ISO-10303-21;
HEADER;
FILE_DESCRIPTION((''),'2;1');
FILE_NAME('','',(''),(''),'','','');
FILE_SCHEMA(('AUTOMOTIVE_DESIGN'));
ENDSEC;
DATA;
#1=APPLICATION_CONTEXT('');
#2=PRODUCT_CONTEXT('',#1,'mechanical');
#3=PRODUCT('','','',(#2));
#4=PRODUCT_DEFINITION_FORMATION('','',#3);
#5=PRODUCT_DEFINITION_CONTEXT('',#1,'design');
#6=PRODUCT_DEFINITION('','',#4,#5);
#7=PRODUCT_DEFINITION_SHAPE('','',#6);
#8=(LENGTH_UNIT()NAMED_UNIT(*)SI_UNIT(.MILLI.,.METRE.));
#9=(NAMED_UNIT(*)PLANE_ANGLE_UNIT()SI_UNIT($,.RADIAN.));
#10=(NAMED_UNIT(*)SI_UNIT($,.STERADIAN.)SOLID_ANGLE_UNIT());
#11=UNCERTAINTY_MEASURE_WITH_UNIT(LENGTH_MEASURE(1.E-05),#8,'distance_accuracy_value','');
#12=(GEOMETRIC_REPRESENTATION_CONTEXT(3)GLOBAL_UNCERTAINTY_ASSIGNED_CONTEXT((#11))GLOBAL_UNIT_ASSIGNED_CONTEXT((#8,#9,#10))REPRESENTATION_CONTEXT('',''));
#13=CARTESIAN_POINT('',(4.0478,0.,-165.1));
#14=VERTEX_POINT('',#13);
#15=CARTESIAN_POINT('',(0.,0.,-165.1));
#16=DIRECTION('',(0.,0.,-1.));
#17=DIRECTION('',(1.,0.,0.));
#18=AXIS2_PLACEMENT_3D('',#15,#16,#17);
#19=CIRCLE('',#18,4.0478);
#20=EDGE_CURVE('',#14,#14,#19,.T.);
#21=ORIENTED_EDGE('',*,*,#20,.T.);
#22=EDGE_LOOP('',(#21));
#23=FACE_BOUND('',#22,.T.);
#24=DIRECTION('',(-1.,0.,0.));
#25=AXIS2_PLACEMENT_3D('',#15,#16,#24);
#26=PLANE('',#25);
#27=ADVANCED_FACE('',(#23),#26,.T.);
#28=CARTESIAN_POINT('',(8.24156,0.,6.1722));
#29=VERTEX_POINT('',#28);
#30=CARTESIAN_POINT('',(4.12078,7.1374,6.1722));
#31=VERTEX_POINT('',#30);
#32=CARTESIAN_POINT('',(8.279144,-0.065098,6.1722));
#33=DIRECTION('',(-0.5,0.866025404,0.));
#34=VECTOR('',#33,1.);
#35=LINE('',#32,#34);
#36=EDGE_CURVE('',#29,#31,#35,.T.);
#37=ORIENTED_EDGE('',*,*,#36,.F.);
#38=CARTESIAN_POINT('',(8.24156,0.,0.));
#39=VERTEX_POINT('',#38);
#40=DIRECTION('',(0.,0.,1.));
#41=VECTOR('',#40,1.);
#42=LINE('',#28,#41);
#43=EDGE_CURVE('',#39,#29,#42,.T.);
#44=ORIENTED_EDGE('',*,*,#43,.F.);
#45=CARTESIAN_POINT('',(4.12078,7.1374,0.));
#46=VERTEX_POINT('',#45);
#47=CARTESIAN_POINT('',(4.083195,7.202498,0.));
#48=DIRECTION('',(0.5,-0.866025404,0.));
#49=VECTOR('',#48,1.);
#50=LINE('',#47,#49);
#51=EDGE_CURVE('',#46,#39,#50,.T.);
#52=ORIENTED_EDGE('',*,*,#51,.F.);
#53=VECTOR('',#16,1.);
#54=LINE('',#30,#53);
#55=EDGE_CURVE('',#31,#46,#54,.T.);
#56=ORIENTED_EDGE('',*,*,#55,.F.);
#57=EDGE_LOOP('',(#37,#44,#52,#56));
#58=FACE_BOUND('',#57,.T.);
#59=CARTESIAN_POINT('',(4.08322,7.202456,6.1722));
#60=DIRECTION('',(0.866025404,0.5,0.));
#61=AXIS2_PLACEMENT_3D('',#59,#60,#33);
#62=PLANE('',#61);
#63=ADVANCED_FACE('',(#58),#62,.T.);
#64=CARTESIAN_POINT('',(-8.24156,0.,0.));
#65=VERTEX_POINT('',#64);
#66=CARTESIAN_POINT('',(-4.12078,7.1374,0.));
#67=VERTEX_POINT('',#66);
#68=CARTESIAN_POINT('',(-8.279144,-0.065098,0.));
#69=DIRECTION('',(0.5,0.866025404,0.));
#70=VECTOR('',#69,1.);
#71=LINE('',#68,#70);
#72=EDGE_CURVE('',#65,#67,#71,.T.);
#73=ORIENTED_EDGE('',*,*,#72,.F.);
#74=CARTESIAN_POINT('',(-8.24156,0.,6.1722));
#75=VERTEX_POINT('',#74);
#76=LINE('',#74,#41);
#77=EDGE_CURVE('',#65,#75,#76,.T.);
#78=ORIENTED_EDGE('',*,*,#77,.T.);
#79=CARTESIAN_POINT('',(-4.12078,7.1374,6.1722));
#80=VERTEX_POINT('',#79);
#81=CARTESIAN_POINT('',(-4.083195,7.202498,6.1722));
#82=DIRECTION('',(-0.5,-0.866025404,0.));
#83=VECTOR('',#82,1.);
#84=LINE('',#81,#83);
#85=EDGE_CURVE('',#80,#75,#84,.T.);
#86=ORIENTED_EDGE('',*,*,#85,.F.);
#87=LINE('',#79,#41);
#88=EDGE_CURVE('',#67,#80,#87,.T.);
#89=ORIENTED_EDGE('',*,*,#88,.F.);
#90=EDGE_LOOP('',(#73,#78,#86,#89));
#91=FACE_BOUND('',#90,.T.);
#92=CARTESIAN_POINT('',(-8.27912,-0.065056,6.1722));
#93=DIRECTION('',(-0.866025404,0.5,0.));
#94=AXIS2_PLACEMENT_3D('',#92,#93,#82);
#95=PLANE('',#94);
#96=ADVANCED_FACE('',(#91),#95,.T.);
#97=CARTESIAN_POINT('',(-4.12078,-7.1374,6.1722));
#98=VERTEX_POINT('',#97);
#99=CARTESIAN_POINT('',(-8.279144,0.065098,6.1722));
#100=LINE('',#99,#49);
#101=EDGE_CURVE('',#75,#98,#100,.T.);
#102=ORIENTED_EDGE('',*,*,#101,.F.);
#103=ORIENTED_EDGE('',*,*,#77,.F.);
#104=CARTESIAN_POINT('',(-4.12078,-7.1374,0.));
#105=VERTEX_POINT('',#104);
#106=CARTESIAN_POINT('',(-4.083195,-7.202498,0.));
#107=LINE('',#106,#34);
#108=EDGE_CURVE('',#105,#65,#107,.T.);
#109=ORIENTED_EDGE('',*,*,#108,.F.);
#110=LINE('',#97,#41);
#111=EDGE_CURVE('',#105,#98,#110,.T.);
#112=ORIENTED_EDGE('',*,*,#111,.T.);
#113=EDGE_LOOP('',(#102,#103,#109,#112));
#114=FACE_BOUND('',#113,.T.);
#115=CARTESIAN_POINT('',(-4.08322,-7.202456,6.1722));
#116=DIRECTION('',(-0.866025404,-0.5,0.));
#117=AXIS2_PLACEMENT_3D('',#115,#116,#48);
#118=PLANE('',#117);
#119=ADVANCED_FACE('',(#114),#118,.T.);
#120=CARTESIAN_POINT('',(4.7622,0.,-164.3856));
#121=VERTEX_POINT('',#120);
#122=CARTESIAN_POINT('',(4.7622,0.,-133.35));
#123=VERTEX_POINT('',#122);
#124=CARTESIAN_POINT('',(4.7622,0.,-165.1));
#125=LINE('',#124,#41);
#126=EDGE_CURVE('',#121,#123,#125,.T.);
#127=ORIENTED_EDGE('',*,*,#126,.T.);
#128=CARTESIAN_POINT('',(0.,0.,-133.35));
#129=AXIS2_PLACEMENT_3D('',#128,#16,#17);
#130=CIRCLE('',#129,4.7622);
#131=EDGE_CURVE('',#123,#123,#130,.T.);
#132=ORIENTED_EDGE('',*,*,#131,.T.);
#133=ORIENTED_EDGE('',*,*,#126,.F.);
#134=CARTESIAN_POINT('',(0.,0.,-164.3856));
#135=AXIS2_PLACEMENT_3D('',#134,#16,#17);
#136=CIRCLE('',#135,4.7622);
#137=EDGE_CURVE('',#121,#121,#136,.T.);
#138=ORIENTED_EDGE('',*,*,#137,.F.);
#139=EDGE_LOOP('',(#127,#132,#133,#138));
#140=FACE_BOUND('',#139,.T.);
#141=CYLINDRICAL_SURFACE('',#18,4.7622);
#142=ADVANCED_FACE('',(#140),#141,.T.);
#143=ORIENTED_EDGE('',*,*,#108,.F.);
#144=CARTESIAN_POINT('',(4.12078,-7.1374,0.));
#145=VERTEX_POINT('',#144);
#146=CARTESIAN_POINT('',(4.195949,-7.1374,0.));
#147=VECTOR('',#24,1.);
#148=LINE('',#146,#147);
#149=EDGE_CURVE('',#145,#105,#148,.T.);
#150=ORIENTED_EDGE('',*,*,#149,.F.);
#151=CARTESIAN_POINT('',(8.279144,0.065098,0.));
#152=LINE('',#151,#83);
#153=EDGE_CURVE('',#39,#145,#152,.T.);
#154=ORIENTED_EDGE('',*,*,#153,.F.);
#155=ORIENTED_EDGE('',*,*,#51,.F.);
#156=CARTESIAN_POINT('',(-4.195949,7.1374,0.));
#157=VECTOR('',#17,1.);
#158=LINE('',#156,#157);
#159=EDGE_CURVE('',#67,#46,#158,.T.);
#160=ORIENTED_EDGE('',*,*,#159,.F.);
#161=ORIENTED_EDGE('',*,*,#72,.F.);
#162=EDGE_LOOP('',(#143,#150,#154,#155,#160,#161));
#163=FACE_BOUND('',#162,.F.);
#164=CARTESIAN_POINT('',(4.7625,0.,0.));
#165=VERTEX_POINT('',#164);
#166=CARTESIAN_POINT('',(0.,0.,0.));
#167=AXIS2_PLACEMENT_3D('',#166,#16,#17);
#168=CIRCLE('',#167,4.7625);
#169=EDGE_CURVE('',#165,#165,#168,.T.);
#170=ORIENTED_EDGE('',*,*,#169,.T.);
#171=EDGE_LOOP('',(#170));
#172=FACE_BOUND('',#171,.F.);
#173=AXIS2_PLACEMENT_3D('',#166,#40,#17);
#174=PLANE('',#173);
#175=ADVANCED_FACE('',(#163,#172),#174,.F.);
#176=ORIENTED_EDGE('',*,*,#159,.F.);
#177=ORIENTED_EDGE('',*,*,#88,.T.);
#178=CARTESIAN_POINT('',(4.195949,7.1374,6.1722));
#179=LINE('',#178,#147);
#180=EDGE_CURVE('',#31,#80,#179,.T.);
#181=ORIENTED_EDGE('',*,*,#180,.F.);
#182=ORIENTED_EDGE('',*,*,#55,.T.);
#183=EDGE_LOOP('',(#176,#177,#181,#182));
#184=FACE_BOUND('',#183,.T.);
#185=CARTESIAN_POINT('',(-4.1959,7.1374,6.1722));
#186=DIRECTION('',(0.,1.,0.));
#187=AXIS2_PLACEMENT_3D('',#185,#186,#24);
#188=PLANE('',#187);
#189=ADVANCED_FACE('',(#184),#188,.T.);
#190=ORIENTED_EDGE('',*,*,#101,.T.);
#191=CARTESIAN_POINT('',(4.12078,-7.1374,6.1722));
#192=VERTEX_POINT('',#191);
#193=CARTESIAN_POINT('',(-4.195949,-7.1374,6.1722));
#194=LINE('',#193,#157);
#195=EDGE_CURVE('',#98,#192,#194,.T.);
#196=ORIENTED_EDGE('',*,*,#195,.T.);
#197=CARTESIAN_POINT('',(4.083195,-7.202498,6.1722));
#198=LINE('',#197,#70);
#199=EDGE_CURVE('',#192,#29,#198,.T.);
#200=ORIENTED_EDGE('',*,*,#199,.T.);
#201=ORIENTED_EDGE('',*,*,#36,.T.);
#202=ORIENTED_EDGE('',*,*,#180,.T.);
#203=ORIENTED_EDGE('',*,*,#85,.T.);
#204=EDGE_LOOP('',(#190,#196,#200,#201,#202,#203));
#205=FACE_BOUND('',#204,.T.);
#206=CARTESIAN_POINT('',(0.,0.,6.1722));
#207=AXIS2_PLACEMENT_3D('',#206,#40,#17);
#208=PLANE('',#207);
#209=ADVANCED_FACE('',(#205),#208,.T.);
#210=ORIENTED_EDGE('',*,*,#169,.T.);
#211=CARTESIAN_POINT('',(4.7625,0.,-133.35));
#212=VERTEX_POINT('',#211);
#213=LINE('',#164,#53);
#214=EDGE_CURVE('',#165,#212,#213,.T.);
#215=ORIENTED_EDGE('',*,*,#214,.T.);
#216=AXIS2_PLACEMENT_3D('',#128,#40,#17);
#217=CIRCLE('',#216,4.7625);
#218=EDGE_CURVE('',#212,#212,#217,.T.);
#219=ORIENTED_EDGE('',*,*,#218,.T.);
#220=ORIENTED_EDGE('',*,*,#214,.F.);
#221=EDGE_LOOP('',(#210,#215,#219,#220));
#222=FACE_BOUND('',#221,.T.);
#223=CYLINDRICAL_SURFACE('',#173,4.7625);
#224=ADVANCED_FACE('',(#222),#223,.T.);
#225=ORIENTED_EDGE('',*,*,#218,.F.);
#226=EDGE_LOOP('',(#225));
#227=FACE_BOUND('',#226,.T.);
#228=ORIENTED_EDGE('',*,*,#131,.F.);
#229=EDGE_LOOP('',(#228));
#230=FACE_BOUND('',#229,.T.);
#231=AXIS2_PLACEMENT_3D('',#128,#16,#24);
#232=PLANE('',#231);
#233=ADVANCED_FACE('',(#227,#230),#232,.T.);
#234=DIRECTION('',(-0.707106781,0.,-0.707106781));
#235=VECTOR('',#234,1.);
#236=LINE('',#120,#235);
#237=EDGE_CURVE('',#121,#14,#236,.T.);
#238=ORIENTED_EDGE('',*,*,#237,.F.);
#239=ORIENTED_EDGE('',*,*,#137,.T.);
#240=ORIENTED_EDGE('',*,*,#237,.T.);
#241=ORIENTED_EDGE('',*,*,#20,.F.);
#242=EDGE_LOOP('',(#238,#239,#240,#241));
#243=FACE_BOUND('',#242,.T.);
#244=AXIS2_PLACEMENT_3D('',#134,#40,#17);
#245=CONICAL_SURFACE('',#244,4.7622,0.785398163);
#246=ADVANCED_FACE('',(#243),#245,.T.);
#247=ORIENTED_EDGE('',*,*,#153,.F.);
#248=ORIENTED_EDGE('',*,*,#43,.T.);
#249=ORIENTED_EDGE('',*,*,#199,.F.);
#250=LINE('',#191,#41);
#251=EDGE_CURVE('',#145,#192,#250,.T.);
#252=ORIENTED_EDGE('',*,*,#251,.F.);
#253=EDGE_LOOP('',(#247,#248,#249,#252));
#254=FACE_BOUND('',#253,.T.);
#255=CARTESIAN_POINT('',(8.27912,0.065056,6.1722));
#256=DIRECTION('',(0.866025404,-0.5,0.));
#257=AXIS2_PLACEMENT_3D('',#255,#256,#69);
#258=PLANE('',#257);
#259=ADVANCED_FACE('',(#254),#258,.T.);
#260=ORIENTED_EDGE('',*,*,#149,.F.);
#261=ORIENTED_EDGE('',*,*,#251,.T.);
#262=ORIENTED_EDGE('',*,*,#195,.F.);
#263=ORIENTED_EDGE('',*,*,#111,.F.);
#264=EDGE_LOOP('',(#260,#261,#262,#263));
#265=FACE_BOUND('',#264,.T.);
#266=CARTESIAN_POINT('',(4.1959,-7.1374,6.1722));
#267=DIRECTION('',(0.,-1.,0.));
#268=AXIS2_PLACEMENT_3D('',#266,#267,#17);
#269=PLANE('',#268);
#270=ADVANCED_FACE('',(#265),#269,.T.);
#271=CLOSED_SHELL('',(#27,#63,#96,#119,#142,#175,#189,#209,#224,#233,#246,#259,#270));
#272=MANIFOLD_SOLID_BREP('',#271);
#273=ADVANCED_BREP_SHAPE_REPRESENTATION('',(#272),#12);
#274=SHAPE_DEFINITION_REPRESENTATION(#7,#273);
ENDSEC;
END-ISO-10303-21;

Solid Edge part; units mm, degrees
sketch "Sketch1" plane through (0, 0, 0) normal (0, 0, 1) x (1, 0, 0)
  circle A0 centre (0, 0) radius 8.2794
  dimension "D1" = 16.5588
extrude "Protrusion1" add sketch "Sketch1" along normal blind 6.1722
sketch "Sketch2" plane through (0, 0, 0) normal (0, 0, -1) x (1, 0, 0)
  circle A0 centre (0, 0) radius 4.7625
extrude "Protrusion2" add sketch "Sketch2" along normal blind 165.1
sketch "Sketch3" plane through (0, 0, -165.1) normal (0, 0, -1) x (1, 0, 0)
  circle A0 centre (0, 0) radius 4.7622
extrude "Cutout1" cut sketch "Sketch3" against normal blind 31.75 flip side to cut
chamfer "Chamfer_1" distance 0.7144 angle 45 1 edges at (-4.7622, 0, -165.1)
sketch "Sketch4" plane through (0, 0, 6.1722) normal (0, 0, 1) x (1, 0, 0)
  line L0 (-4.1959, 7.1374) -> (4.1959, 7.1374)
  dimension "D1" = 14.2748
extrude "Cutout2" cut sketch "Sketch4" against normal up to next material side at (0, 7.1874, 6.1722)
pattern_circular "Pattern1" count 6 over 360 about axis through (0, 0, 6.1722) along (0, 0, 1) of "Cutout2"
properties part number "24102832"
